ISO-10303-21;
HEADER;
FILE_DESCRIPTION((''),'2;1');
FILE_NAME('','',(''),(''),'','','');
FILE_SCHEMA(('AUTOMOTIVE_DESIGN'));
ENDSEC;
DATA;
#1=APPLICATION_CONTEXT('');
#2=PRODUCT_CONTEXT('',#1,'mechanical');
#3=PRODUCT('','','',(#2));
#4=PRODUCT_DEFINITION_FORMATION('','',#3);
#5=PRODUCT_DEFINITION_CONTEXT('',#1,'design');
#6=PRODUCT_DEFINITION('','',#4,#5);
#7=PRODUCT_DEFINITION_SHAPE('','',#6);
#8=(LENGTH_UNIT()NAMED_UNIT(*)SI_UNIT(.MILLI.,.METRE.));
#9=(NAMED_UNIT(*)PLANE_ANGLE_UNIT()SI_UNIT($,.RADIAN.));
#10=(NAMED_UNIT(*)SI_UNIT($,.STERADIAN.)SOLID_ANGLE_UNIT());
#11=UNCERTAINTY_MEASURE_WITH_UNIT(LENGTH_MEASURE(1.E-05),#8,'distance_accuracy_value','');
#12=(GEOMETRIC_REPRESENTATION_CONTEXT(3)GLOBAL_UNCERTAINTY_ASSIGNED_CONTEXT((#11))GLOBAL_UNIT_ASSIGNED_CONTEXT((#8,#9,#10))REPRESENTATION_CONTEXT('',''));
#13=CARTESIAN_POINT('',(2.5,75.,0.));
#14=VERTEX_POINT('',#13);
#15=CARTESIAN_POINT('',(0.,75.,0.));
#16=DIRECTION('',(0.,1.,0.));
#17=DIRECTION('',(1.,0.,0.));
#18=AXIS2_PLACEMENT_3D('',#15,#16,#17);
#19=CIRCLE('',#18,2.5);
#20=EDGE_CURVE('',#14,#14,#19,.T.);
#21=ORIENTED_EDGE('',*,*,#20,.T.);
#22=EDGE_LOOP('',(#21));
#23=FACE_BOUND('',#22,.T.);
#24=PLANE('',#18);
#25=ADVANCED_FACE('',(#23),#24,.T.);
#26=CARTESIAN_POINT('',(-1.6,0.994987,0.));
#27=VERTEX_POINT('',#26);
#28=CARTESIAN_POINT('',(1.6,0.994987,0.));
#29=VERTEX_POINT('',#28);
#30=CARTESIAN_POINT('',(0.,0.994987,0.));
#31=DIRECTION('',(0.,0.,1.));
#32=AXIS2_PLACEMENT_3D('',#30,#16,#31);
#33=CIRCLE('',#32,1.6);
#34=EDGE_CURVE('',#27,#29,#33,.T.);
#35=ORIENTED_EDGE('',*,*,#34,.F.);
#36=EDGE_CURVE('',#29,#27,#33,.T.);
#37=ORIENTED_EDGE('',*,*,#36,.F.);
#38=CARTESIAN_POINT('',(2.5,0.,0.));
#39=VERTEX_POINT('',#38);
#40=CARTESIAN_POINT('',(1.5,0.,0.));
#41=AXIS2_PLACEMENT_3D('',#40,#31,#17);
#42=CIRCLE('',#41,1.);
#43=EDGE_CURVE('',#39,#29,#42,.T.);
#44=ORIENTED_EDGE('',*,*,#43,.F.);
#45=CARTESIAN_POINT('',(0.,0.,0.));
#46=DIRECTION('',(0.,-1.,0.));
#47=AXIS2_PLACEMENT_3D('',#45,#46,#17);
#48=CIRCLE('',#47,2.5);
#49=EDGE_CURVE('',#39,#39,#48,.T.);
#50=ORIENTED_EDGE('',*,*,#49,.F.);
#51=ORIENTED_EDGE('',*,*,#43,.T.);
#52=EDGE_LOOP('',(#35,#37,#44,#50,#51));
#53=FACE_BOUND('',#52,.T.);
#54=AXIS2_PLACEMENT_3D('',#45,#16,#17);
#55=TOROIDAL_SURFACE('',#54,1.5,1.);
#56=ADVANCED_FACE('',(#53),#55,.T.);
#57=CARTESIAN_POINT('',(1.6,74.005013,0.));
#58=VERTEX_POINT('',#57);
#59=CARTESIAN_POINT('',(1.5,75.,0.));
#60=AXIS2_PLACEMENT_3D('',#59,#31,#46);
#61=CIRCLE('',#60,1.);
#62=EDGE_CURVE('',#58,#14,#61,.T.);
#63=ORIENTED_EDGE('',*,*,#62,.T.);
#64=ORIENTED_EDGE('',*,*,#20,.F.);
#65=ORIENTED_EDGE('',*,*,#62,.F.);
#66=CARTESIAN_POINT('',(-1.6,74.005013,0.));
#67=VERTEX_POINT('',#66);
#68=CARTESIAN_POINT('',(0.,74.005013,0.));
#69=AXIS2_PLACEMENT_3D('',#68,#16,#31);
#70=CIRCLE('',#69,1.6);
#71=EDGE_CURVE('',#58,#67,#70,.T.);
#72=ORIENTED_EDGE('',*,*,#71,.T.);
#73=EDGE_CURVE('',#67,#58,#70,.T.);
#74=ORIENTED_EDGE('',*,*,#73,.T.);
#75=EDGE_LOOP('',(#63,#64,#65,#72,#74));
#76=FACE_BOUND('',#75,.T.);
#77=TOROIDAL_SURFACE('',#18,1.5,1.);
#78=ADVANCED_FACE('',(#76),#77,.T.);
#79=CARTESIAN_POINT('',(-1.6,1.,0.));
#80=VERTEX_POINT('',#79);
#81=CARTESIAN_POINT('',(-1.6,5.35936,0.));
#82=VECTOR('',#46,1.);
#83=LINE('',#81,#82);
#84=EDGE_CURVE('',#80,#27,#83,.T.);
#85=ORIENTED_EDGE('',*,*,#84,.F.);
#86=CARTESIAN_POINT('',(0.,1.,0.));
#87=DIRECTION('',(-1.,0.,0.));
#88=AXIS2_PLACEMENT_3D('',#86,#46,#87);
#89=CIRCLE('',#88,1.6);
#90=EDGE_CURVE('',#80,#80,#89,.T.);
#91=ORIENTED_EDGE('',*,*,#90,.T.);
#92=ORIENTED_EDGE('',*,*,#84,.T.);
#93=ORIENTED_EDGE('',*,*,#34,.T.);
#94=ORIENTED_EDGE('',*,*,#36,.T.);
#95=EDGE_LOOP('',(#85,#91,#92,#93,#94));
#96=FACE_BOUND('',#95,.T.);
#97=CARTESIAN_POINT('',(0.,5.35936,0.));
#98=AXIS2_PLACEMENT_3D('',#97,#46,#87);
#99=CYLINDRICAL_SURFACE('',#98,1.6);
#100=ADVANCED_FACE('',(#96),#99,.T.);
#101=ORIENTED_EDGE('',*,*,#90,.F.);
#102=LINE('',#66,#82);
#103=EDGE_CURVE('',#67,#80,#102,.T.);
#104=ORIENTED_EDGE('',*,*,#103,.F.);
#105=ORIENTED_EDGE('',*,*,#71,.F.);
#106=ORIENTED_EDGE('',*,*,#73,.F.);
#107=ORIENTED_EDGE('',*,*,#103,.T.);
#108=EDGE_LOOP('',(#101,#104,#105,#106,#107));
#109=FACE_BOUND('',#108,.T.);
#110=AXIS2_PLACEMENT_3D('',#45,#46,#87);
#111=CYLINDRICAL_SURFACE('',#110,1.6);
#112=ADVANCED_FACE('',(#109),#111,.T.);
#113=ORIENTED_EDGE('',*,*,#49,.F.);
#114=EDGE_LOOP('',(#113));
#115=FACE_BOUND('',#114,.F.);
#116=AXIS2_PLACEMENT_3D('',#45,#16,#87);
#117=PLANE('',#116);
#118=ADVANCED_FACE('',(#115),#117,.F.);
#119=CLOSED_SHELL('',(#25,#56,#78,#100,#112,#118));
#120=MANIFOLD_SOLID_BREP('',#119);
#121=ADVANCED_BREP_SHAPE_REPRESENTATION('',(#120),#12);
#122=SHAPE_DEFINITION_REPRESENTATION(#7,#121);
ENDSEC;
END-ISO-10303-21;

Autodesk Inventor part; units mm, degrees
ref_plane "YZ Plane" through (0, 0, 0) normal (1, 0, 0) x (0, 1, 0)
ref_plane "XZ Plane" through (0, 0, 0) normal (0, 1, 0) x (-1, 0, 0)
ref_plane "XY Plane" through (0, 0, 0) normal (0, 0, 1) x (1, 0, 0)
sketch "Эскиз1" plane through (0, 0, 0) normal (0, 1, 0) x (-1, 0, 0)
  circle A0 centre (0, 0) radius 1.6
  dimension "d0" = 3.2
extrude "Выдавливание1" add sketch "Эскиз1" along normal blind 75
sketch "Эскиз2" plane through (0, 75, 0) normal (0, 1, 0) x (1, 0, 0)
  circle A0 centre (0, 0) radius 2.5
  dimension "d3" = 5
extrude "Выдавливание2" add sketch "Эскиз2" against normal blind 1
fillet "Сопряжение1" radius 1 1 edges at (-2.5, 74, 0)
sketch "Эскиз3" plane through (0, 0, 0) normal (0, -1, 0) x (1, 0, 0)
  circle A0 centre (0, 0) radius 2.5
extrude "Выдавливание3" add sketch "Эскиз3" against normal blind 1
fillet "Сопряжение2" radius 1 1 edges at (-2.5, 1, 0)
ref_plane "РабПлоскость1" through (-4.5, 3.005, 18.077) normal (-1, 0, 0) x (0, 0, -1)
sketch "Эскиз4" plane through (-4.5, 3.005, 18.077) normal (-1, 0, 0) x (0, 0, -1)
  line L0 (15.577, -71.995) -> (20.577, -71.995) projected
  line L1 (20.577, 3.005) -> (15.577, 3.005) projected
  point P0 (18.077, 3.005)
  dimension "d10" = 75
properties part number "vint"
